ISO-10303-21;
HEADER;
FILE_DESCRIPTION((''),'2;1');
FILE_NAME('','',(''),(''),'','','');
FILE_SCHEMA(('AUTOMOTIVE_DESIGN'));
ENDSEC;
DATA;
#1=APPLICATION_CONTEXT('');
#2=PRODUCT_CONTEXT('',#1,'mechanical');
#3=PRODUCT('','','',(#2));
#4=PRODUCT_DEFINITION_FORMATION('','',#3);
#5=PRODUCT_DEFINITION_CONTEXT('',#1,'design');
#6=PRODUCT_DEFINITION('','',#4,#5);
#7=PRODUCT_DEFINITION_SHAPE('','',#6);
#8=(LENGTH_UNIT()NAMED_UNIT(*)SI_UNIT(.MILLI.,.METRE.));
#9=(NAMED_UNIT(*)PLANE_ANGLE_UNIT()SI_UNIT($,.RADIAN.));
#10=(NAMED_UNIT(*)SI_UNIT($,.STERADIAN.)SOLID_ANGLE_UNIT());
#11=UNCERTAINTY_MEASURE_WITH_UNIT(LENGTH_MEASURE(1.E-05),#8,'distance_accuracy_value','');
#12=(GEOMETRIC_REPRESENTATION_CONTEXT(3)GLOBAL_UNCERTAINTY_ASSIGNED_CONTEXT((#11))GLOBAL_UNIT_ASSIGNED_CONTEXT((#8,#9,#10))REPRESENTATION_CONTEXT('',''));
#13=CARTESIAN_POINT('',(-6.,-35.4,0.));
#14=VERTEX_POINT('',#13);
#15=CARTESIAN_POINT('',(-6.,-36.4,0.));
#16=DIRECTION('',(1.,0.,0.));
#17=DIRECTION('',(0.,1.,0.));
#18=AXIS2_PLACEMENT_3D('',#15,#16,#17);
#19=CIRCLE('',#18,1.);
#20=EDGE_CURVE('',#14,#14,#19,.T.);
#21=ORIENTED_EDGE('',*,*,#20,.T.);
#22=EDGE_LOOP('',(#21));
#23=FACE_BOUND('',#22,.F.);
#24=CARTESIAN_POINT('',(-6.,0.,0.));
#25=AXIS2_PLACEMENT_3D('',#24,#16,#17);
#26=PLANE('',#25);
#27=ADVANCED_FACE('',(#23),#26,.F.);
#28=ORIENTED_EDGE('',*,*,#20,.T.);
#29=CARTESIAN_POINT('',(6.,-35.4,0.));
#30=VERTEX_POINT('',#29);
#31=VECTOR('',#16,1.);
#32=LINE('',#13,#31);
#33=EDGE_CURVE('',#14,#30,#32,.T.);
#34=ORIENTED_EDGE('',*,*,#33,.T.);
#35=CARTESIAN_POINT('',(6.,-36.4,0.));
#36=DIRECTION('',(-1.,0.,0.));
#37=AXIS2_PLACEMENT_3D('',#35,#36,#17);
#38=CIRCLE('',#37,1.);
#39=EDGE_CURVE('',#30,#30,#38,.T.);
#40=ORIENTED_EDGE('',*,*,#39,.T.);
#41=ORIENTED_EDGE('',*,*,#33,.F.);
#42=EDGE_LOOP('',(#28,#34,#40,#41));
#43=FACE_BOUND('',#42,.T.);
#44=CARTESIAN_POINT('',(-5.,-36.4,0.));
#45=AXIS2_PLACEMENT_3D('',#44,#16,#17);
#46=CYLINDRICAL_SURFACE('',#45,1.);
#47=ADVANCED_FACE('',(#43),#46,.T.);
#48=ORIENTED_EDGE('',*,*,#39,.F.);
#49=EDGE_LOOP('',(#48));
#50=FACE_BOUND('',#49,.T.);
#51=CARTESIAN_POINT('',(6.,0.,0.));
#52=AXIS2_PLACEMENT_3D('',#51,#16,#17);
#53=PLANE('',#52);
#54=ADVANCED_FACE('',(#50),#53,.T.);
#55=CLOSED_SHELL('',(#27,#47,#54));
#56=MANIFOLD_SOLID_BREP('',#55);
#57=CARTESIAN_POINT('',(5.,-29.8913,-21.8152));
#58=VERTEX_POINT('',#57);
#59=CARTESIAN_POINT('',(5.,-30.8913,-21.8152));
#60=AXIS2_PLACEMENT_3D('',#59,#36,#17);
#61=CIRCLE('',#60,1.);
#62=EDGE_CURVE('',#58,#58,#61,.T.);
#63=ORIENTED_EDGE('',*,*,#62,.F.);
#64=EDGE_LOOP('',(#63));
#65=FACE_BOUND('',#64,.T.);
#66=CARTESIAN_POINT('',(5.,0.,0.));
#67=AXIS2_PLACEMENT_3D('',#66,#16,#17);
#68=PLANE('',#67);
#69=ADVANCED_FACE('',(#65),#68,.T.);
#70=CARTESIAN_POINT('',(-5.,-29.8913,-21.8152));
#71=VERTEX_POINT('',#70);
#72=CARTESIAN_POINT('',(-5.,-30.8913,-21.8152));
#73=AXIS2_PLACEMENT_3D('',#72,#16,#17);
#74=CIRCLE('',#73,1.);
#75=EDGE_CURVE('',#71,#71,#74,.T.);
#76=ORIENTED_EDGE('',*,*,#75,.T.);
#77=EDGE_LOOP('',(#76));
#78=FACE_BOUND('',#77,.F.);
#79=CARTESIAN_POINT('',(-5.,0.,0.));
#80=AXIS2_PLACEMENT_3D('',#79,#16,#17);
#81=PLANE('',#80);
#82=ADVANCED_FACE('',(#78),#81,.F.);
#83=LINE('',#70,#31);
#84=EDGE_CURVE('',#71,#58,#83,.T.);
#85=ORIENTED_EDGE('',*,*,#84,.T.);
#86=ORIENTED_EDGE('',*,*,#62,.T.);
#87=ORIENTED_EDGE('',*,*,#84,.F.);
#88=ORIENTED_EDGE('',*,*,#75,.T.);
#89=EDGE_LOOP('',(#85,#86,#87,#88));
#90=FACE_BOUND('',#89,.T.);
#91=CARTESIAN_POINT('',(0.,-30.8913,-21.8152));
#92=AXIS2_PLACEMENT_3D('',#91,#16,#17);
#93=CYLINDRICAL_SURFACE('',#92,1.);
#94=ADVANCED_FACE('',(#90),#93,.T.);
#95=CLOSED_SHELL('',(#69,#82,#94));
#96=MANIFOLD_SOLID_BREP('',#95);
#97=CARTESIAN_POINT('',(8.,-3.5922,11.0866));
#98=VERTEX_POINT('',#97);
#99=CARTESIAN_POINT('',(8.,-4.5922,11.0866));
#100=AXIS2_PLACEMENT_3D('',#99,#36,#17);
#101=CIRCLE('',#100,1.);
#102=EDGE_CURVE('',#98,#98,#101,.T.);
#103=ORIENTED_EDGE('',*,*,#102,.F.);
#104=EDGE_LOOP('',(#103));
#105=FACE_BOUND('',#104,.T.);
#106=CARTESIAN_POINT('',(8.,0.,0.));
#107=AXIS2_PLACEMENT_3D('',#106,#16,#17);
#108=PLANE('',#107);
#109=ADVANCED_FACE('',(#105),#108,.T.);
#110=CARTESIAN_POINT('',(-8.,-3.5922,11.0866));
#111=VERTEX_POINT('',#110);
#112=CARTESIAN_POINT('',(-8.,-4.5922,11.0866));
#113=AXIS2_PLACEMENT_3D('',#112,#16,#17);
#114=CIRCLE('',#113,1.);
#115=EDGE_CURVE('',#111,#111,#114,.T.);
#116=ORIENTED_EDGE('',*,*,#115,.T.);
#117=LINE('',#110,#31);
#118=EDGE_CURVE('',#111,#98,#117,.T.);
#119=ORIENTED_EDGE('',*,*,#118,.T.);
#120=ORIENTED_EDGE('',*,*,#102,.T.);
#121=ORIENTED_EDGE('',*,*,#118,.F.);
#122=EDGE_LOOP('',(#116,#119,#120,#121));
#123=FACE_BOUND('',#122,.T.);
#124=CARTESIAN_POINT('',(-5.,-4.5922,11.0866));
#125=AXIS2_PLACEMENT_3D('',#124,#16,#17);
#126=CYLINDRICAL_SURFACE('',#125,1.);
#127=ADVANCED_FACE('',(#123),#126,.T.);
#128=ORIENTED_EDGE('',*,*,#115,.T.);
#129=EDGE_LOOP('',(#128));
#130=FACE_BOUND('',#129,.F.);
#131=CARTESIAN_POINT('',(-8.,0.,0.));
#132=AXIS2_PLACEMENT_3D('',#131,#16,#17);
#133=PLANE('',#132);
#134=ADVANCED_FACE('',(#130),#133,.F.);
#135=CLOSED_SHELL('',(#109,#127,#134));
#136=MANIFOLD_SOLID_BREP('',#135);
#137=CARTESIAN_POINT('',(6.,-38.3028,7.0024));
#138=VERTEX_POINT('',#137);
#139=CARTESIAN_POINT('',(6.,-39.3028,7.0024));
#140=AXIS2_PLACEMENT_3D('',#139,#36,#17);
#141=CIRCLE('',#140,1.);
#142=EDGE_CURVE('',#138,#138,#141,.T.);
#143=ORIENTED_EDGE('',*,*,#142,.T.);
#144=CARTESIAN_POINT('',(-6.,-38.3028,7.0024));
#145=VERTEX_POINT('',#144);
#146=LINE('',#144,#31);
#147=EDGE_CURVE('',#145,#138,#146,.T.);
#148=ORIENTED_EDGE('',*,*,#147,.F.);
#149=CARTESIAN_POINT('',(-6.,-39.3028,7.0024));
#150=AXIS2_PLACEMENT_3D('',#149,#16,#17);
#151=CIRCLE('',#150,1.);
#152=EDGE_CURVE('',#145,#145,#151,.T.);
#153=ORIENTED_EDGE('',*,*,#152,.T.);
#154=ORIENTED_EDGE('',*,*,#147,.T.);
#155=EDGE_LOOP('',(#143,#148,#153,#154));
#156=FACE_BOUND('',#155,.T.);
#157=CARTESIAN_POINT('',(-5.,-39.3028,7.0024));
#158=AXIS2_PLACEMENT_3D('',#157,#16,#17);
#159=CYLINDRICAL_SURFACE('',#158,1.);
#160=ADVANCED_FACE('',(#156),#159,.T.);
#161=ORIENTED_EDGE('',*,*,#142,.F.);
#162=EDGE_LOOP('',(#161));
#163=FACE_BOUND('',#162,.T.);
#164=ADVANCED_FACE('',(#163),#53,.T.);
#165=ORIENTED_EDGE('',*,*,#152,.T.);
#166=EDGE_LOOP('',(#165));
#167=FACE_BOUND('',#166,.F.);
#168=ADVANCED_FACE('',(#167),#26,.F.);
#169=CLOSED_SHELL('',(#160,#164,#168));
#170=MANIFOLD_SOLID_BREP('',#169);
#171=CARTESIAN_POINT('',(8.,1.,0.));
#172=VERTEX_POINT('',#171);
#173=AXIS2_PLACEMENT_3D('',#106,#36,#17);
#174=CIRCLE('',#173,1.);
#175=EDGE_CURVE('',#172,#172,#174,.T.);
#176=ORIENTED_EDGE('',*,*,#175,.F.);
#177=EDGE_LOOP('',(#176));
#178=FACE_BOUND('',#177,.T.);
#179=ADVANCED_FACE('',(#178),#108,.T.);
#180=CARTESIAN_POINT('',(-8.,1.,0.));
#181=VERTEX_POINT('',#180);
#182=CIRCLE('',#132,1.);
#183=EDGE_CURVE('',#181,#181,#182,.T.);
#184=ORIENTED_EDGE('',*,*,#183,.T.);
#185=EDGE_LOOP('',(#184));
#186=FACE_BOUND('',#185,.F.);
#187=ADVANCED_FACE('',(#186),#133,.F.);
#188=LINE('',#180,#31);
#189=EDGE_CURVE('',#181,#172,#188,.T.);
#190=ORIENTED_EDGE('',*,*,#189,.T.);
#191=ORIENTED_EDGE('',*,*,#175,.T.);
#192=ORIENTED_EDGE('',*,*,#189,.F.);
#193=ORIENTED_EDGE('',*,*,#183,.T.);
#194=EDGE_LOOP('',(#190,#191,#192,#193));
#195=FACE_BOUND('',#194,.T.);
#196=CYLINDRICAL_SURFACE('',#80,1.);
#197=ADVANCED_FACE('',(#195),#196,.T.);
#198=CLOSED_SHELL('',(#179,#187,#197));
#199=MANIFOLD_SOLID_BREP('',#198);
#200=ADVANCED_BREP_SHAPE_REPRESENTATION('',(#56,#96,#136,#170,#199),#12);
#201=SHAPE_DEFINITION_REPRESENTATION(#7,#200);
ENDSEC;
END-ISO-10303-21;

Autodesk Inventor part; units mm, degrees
sketch "スケッチ1" plane through (0, 0, 0) normal (1, 0, 0) x (0, 1, 0)
  circle A0 centre (0, 0) radius 1
  circle A1 centre (-36.4, 0) radius 1
  circle A2 centre (-30.8913, -21.8152) radius 1
  line L0 (-36.4, 0) -> (0, 0)
  line L1 (-30.8913, -21.8152) -> (-36.4, 0)
  line L2 (0, 0) -> (0, 70.9009)
  circle A3 centre (-4.5922, 11.0866) radius 1
  circle A4 centre (-39.3028, 7.0024) radius 1
  line L3 (0, 0) -> (-4.5922, 11.0866)
  line L4 (-39.3028, 7.0024) -> (-36.4, 0)
  line L5 (-39.3028, 7.0024) -> (-4.5922, 11.0866)
  line L6 (-48.5633, 0) -> (9.2606, 0) projected
  line L7 (-39.3028, 7.0024) -> (-38.2362, 7.2717)
  line L8 (-36.4, 0) -> (-38.2362, 7.2717)
  line L9 (0, 0) -> (0, 28.7676)
  dimension "d0" = 2
  dimension "d1" = 2
  dimension "d2" = 2
  dimension "d3" = 36.4
  dimension "d4" = 22.5
  dimension "d5" = 90
  dimension "d9" = 2
  dimension "d10" = 2
  dimension "d13" = 12
  dimension "d15" = 34.95
  dimension "d23" = 1.1
  dimension "d24" = 7.5
  dimension "d29" = 90
  dimension "d30" = 22.5
extrude "押し出し1" add sketch "スケッチ1" along normal mid plane 10 contours L6 L2 A0 | A0 L0 L6 | L2 L3 A0 | A0 L3 L0 | L0 L8 A1 | A1 L1 L0 | L3 L5 A3 | A3 L5 L3 | L8 L4 A1 | A1 L6 L1 | L6 A1 L4 | L4 L5 A4 | A4 L7 L4 | L5 L7 A4 | A2
move faces "移動1" translate (3, 0, 0) faces at (5, -5.0742, 10.9876) (5, 0.5848, -0.397) (3.3333, 0.9871, -0.1604) (-3.3333, 0.9871, -0.1604)
move faces "移動2" translate (-3, 0, 0) faces at (-5, -5.0742, 10.9876) (-5, 0.5848, -0.397)
move faces "移動3" translate (1, 0, 0) faces at (5, -39.7818, 6.7248) (5, -36.7299, -0.221)
move faces "移動4" translate (-1, 0, 0) faces at (-5, -39.7818, 6.7248) (-5, -36.7299, -0.221)
properties part number "HbIndexPosture_flex01"
